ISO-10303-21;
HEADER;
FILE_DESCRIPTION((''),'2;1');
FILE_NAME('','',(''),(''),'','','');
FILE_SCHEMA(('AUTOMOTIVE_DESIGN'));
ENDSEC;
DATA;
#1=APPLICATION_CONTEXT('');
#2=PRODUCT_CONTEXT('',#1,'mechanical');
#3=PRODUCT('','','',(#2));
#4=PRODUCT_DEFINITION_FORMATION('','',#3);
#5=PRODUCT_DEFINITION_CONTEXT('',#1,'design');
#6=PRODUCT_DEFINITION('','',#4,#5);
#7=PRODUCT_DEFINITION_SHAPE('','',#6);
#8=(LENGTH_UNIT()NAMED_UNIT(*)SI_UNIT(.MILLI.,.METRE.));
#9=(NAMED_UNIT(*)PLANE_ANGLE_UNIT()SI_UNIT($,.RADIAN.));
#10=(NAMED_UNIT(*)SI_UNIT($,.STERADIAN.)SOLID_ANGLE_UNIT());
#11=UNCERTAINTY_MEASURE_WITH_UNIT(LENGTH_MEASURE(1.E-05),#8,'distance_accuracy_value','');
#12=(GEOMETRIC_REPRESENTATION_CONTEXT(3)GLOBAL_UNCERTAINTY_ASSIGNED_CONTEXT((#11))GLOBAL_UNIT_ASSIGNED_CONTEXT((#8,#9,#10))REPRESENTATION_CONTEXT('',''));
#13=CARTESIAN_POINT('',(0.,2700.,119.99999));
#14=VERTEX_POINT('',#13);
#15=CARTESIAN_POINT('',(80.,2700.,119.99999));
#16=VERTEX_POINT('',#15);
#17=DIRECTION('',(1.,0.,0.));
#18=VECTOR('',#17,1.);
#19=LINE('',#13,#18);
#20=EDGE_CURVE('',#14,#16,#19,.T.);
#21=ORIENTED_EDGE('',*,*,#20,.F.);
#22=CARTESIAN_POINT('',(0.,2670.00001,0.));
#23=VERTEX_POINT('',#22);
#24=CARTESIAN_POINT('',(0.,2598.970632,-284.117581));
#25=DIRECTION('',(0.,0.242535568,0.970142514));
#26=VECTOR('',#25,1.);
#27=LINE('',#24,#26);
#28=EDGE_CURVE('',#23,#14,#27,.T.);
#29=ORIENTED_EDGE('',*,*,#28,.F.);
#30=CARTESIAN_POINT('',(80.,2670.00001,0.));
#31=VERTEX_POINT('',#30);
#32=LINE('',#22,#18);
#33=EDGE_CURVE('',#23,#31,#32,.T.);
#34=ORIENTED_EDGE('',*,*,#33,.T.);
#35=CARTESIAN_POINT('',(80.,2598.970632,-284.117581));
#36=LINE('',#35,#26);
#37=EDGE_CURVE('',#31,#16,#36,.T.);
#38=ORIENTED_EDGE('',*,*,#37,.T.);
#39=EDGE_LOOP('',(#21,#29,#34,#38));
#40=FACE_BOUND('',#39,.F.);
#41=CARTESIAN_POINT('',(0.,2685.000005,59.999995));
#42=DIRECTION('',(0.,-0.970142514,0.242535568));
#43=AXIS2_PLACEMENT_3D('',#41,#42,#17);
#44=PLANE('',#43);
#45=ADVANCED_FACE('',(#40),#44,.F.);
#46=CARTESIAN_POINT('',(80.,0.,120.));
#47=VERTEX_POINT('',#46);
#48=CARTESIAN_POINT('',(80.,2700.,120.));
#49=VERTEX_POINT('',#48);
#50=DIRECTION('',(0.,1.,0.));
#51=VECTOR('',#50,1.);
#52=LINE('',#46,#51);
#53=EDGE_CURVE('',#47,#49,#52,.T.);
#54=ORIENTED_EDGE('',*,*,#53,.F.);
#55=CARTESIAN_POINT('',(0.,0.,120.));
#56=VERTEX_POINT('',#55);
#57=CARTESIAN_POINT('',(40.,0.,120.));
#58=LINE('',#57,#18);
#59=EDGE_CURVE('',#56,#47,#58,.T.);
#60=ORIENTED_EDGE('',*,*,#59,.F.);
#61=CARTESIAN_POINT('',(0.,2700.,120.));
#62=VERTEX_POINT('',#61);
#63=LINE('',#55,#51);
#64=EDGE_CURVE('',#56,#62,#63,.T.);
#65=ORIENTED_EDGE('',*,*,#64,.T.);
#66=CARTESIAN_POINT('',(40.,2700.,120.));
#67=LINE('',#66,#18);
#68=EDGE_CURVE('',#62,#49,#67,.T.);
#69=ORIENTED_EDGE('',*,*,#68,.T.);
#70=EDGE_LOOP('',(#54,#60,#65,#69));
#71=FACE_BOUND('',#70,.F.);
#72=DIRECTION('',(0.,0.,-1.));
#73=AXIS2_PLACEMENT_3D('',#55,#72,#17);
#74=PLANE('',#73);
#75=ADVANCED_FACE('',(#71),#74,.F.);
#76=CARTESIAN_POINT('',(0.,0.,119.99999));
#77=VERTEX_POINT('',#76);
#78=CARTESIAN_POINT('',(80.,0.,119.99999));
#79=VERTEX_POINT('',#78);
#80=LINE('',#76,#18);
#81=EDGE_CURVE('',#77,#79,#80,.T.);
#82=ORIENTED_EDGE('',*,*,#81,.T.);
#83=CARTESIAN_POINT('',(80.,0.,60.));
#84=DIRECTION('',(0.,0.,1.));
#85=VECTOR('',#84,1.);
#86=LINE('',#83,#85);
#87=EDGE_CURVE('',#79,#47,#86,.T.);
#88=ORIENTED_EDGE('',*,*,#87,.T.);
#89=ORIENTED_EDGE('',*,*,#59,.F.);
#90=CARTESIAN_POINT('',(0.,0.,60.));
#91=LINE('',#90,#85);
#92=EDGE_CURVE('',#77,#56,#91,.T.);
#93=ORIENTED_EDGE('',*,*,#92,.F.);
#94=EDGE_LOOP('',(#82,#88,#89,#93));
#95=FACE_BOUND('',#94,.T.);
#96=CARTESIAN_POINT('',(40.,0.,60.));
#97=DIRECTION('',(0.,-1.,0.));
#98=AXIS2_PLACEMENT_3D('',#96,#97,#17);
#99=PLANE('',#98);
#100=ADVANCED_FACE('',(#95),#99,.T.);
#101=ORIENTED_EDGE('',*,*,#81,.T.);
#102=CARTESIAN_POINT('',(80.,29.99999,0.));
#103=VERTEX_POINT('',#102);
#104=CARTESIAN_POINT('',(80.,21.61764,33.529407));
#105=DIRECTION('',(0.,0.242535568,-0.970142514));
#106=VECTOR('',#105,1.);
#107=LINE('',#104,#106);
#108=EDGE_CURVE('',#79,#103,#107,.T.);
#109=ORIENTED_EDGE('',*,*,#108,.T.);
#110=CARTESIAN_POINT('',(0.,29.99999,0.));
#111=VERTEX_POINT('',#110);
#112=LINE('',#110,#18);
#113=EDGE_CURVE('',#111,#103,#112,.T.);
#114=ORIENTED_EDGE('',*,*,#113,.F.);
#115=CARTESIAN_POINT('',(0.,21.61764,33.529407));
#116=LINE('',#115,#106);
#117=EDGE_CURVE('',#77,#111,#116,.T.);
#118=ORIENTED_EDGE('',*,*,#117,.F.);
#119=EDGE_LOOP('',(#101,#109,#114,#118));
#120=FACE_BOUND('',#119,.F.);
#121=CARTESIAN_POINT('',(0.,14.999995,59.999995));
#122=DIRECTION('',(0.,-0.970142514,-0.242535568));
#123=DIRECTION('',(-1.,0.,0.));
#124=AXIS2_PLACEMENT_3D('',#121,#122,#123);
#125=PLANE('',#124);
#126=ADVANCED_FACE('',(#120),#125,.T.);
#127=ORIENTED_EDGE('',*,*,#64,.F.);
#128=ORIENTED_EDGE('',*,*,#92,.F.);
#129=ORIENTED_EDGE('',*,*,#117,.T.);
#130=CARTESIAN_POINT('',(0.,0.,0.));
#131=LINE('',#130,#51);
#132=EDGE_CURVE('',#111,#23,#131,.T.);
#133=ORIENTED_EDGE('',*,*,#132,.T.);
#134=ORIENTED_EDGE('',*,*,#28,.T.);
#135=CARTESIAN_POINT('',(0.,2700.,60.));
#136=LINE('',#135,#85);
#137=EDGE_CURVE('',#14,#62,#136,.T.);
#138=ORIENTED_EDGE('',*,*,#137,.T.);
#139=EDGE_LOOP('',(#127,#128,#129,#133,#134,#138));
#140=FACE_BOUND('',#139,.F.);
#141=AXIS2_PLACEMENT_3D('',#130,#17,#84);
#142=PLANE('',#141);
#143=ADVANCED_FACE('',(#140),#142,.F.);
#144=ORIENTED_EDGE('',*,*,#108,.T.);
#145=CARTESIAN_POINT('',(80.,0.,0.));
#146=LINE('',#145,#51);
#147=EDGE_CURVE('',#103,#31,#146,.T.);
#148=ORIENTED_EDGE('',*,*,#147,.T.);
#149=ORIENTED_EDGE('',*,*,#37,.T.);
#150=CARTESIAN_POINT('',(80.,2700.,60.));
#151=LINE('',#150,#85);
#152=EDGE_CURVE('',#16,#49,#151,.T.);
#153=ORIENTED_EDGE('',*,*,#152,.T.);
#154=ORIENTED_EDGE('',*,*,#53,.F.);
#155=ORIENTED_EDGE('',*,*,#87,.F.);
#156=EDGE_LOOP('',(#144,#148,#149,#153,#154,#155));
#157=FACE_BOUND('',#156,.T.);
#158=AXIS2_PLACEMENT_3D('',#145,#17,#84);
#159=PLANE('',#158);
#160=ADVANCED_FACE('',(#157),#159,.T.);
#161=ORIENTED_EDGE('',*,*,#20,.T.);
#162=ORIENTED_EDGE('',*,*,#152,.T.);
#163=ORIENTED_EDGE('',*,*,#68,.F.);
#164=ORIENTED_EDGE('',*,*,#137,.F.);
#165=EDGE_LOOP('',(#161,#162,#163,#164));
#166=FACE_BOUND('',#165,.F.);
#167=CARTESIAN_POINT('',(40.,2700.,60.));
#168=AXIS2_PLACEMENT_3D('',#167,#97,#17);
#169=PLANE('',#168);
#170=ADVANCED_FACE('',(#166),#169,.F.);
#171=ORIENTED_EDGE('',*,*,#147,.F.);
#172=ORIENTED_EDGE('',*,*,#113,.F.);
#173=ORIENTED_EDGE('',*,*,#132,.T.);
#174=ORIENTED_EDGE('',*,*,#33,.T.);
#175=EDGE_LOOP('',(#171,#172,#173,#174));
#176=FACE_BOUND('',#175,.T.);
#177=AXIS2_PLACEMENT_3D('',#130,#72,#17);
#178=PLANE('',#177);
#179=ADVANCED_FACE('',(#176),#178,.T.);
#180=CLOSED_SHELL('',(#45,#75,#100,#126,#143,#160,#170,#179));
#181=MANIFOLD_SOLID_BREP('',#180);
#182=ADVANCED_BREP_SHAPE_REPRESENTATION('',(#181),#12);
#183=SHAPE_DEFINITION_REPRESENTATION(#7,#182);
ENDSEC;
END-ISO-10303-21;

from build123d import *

# Parameters (mm, degrees)
F0_W     = 80
F0_H     = 120
F1_DEPTH = 2700
F2_SIZE2 = 29.99999
F2_SIZE  = 119.99999
F3_SIZE2 = 119.99999
F3_SIZE  = 29.99999


# Not quite as in the source:
# - a fillet or chamfer is up to 0.001 mm smaller than in the source, because OpenCascade refuses the exact size


with BuildPart() as f1:
    # F0 (on Front) → F1 (new body)
    with BuildSketch(Plane.XZ):
        with Locations((40, 60)):
            Rectangle(F0_W, F0_H)
    extrude(amount=-F1_DEPTH)

    # F2 (size 120 and 30 in the source; OpenCascade refuses exactly that, so slightly less here)
    f2_edges = [f1.edges().sort_by_distance(p)[0] for p in [
        (40, 0, 0),
    ]]
    f2_side = f1.faces().sort_by_distance((40, 0, 60))[0]
    chamfer(f2_edges, length=F2_SIZE, length2=F2_SIZE2, reference=f2_side)

    # F3 (size 30 and 120 in the source; OpenCascade refuses exactly that, so slightly less here)
    f3_edges = [f1.edges().sort_by_distance(p)[0] for p in [
        (40, 2700, 0),
    ]]
    f3_side = f1.faces().sort_by_distance((40, 1364.999995, 0))[0]
    chamfer(f3_edges, length=F3_SIZE, length2=F3_SIZE2, reference=f3_side)


solid = f1.part
